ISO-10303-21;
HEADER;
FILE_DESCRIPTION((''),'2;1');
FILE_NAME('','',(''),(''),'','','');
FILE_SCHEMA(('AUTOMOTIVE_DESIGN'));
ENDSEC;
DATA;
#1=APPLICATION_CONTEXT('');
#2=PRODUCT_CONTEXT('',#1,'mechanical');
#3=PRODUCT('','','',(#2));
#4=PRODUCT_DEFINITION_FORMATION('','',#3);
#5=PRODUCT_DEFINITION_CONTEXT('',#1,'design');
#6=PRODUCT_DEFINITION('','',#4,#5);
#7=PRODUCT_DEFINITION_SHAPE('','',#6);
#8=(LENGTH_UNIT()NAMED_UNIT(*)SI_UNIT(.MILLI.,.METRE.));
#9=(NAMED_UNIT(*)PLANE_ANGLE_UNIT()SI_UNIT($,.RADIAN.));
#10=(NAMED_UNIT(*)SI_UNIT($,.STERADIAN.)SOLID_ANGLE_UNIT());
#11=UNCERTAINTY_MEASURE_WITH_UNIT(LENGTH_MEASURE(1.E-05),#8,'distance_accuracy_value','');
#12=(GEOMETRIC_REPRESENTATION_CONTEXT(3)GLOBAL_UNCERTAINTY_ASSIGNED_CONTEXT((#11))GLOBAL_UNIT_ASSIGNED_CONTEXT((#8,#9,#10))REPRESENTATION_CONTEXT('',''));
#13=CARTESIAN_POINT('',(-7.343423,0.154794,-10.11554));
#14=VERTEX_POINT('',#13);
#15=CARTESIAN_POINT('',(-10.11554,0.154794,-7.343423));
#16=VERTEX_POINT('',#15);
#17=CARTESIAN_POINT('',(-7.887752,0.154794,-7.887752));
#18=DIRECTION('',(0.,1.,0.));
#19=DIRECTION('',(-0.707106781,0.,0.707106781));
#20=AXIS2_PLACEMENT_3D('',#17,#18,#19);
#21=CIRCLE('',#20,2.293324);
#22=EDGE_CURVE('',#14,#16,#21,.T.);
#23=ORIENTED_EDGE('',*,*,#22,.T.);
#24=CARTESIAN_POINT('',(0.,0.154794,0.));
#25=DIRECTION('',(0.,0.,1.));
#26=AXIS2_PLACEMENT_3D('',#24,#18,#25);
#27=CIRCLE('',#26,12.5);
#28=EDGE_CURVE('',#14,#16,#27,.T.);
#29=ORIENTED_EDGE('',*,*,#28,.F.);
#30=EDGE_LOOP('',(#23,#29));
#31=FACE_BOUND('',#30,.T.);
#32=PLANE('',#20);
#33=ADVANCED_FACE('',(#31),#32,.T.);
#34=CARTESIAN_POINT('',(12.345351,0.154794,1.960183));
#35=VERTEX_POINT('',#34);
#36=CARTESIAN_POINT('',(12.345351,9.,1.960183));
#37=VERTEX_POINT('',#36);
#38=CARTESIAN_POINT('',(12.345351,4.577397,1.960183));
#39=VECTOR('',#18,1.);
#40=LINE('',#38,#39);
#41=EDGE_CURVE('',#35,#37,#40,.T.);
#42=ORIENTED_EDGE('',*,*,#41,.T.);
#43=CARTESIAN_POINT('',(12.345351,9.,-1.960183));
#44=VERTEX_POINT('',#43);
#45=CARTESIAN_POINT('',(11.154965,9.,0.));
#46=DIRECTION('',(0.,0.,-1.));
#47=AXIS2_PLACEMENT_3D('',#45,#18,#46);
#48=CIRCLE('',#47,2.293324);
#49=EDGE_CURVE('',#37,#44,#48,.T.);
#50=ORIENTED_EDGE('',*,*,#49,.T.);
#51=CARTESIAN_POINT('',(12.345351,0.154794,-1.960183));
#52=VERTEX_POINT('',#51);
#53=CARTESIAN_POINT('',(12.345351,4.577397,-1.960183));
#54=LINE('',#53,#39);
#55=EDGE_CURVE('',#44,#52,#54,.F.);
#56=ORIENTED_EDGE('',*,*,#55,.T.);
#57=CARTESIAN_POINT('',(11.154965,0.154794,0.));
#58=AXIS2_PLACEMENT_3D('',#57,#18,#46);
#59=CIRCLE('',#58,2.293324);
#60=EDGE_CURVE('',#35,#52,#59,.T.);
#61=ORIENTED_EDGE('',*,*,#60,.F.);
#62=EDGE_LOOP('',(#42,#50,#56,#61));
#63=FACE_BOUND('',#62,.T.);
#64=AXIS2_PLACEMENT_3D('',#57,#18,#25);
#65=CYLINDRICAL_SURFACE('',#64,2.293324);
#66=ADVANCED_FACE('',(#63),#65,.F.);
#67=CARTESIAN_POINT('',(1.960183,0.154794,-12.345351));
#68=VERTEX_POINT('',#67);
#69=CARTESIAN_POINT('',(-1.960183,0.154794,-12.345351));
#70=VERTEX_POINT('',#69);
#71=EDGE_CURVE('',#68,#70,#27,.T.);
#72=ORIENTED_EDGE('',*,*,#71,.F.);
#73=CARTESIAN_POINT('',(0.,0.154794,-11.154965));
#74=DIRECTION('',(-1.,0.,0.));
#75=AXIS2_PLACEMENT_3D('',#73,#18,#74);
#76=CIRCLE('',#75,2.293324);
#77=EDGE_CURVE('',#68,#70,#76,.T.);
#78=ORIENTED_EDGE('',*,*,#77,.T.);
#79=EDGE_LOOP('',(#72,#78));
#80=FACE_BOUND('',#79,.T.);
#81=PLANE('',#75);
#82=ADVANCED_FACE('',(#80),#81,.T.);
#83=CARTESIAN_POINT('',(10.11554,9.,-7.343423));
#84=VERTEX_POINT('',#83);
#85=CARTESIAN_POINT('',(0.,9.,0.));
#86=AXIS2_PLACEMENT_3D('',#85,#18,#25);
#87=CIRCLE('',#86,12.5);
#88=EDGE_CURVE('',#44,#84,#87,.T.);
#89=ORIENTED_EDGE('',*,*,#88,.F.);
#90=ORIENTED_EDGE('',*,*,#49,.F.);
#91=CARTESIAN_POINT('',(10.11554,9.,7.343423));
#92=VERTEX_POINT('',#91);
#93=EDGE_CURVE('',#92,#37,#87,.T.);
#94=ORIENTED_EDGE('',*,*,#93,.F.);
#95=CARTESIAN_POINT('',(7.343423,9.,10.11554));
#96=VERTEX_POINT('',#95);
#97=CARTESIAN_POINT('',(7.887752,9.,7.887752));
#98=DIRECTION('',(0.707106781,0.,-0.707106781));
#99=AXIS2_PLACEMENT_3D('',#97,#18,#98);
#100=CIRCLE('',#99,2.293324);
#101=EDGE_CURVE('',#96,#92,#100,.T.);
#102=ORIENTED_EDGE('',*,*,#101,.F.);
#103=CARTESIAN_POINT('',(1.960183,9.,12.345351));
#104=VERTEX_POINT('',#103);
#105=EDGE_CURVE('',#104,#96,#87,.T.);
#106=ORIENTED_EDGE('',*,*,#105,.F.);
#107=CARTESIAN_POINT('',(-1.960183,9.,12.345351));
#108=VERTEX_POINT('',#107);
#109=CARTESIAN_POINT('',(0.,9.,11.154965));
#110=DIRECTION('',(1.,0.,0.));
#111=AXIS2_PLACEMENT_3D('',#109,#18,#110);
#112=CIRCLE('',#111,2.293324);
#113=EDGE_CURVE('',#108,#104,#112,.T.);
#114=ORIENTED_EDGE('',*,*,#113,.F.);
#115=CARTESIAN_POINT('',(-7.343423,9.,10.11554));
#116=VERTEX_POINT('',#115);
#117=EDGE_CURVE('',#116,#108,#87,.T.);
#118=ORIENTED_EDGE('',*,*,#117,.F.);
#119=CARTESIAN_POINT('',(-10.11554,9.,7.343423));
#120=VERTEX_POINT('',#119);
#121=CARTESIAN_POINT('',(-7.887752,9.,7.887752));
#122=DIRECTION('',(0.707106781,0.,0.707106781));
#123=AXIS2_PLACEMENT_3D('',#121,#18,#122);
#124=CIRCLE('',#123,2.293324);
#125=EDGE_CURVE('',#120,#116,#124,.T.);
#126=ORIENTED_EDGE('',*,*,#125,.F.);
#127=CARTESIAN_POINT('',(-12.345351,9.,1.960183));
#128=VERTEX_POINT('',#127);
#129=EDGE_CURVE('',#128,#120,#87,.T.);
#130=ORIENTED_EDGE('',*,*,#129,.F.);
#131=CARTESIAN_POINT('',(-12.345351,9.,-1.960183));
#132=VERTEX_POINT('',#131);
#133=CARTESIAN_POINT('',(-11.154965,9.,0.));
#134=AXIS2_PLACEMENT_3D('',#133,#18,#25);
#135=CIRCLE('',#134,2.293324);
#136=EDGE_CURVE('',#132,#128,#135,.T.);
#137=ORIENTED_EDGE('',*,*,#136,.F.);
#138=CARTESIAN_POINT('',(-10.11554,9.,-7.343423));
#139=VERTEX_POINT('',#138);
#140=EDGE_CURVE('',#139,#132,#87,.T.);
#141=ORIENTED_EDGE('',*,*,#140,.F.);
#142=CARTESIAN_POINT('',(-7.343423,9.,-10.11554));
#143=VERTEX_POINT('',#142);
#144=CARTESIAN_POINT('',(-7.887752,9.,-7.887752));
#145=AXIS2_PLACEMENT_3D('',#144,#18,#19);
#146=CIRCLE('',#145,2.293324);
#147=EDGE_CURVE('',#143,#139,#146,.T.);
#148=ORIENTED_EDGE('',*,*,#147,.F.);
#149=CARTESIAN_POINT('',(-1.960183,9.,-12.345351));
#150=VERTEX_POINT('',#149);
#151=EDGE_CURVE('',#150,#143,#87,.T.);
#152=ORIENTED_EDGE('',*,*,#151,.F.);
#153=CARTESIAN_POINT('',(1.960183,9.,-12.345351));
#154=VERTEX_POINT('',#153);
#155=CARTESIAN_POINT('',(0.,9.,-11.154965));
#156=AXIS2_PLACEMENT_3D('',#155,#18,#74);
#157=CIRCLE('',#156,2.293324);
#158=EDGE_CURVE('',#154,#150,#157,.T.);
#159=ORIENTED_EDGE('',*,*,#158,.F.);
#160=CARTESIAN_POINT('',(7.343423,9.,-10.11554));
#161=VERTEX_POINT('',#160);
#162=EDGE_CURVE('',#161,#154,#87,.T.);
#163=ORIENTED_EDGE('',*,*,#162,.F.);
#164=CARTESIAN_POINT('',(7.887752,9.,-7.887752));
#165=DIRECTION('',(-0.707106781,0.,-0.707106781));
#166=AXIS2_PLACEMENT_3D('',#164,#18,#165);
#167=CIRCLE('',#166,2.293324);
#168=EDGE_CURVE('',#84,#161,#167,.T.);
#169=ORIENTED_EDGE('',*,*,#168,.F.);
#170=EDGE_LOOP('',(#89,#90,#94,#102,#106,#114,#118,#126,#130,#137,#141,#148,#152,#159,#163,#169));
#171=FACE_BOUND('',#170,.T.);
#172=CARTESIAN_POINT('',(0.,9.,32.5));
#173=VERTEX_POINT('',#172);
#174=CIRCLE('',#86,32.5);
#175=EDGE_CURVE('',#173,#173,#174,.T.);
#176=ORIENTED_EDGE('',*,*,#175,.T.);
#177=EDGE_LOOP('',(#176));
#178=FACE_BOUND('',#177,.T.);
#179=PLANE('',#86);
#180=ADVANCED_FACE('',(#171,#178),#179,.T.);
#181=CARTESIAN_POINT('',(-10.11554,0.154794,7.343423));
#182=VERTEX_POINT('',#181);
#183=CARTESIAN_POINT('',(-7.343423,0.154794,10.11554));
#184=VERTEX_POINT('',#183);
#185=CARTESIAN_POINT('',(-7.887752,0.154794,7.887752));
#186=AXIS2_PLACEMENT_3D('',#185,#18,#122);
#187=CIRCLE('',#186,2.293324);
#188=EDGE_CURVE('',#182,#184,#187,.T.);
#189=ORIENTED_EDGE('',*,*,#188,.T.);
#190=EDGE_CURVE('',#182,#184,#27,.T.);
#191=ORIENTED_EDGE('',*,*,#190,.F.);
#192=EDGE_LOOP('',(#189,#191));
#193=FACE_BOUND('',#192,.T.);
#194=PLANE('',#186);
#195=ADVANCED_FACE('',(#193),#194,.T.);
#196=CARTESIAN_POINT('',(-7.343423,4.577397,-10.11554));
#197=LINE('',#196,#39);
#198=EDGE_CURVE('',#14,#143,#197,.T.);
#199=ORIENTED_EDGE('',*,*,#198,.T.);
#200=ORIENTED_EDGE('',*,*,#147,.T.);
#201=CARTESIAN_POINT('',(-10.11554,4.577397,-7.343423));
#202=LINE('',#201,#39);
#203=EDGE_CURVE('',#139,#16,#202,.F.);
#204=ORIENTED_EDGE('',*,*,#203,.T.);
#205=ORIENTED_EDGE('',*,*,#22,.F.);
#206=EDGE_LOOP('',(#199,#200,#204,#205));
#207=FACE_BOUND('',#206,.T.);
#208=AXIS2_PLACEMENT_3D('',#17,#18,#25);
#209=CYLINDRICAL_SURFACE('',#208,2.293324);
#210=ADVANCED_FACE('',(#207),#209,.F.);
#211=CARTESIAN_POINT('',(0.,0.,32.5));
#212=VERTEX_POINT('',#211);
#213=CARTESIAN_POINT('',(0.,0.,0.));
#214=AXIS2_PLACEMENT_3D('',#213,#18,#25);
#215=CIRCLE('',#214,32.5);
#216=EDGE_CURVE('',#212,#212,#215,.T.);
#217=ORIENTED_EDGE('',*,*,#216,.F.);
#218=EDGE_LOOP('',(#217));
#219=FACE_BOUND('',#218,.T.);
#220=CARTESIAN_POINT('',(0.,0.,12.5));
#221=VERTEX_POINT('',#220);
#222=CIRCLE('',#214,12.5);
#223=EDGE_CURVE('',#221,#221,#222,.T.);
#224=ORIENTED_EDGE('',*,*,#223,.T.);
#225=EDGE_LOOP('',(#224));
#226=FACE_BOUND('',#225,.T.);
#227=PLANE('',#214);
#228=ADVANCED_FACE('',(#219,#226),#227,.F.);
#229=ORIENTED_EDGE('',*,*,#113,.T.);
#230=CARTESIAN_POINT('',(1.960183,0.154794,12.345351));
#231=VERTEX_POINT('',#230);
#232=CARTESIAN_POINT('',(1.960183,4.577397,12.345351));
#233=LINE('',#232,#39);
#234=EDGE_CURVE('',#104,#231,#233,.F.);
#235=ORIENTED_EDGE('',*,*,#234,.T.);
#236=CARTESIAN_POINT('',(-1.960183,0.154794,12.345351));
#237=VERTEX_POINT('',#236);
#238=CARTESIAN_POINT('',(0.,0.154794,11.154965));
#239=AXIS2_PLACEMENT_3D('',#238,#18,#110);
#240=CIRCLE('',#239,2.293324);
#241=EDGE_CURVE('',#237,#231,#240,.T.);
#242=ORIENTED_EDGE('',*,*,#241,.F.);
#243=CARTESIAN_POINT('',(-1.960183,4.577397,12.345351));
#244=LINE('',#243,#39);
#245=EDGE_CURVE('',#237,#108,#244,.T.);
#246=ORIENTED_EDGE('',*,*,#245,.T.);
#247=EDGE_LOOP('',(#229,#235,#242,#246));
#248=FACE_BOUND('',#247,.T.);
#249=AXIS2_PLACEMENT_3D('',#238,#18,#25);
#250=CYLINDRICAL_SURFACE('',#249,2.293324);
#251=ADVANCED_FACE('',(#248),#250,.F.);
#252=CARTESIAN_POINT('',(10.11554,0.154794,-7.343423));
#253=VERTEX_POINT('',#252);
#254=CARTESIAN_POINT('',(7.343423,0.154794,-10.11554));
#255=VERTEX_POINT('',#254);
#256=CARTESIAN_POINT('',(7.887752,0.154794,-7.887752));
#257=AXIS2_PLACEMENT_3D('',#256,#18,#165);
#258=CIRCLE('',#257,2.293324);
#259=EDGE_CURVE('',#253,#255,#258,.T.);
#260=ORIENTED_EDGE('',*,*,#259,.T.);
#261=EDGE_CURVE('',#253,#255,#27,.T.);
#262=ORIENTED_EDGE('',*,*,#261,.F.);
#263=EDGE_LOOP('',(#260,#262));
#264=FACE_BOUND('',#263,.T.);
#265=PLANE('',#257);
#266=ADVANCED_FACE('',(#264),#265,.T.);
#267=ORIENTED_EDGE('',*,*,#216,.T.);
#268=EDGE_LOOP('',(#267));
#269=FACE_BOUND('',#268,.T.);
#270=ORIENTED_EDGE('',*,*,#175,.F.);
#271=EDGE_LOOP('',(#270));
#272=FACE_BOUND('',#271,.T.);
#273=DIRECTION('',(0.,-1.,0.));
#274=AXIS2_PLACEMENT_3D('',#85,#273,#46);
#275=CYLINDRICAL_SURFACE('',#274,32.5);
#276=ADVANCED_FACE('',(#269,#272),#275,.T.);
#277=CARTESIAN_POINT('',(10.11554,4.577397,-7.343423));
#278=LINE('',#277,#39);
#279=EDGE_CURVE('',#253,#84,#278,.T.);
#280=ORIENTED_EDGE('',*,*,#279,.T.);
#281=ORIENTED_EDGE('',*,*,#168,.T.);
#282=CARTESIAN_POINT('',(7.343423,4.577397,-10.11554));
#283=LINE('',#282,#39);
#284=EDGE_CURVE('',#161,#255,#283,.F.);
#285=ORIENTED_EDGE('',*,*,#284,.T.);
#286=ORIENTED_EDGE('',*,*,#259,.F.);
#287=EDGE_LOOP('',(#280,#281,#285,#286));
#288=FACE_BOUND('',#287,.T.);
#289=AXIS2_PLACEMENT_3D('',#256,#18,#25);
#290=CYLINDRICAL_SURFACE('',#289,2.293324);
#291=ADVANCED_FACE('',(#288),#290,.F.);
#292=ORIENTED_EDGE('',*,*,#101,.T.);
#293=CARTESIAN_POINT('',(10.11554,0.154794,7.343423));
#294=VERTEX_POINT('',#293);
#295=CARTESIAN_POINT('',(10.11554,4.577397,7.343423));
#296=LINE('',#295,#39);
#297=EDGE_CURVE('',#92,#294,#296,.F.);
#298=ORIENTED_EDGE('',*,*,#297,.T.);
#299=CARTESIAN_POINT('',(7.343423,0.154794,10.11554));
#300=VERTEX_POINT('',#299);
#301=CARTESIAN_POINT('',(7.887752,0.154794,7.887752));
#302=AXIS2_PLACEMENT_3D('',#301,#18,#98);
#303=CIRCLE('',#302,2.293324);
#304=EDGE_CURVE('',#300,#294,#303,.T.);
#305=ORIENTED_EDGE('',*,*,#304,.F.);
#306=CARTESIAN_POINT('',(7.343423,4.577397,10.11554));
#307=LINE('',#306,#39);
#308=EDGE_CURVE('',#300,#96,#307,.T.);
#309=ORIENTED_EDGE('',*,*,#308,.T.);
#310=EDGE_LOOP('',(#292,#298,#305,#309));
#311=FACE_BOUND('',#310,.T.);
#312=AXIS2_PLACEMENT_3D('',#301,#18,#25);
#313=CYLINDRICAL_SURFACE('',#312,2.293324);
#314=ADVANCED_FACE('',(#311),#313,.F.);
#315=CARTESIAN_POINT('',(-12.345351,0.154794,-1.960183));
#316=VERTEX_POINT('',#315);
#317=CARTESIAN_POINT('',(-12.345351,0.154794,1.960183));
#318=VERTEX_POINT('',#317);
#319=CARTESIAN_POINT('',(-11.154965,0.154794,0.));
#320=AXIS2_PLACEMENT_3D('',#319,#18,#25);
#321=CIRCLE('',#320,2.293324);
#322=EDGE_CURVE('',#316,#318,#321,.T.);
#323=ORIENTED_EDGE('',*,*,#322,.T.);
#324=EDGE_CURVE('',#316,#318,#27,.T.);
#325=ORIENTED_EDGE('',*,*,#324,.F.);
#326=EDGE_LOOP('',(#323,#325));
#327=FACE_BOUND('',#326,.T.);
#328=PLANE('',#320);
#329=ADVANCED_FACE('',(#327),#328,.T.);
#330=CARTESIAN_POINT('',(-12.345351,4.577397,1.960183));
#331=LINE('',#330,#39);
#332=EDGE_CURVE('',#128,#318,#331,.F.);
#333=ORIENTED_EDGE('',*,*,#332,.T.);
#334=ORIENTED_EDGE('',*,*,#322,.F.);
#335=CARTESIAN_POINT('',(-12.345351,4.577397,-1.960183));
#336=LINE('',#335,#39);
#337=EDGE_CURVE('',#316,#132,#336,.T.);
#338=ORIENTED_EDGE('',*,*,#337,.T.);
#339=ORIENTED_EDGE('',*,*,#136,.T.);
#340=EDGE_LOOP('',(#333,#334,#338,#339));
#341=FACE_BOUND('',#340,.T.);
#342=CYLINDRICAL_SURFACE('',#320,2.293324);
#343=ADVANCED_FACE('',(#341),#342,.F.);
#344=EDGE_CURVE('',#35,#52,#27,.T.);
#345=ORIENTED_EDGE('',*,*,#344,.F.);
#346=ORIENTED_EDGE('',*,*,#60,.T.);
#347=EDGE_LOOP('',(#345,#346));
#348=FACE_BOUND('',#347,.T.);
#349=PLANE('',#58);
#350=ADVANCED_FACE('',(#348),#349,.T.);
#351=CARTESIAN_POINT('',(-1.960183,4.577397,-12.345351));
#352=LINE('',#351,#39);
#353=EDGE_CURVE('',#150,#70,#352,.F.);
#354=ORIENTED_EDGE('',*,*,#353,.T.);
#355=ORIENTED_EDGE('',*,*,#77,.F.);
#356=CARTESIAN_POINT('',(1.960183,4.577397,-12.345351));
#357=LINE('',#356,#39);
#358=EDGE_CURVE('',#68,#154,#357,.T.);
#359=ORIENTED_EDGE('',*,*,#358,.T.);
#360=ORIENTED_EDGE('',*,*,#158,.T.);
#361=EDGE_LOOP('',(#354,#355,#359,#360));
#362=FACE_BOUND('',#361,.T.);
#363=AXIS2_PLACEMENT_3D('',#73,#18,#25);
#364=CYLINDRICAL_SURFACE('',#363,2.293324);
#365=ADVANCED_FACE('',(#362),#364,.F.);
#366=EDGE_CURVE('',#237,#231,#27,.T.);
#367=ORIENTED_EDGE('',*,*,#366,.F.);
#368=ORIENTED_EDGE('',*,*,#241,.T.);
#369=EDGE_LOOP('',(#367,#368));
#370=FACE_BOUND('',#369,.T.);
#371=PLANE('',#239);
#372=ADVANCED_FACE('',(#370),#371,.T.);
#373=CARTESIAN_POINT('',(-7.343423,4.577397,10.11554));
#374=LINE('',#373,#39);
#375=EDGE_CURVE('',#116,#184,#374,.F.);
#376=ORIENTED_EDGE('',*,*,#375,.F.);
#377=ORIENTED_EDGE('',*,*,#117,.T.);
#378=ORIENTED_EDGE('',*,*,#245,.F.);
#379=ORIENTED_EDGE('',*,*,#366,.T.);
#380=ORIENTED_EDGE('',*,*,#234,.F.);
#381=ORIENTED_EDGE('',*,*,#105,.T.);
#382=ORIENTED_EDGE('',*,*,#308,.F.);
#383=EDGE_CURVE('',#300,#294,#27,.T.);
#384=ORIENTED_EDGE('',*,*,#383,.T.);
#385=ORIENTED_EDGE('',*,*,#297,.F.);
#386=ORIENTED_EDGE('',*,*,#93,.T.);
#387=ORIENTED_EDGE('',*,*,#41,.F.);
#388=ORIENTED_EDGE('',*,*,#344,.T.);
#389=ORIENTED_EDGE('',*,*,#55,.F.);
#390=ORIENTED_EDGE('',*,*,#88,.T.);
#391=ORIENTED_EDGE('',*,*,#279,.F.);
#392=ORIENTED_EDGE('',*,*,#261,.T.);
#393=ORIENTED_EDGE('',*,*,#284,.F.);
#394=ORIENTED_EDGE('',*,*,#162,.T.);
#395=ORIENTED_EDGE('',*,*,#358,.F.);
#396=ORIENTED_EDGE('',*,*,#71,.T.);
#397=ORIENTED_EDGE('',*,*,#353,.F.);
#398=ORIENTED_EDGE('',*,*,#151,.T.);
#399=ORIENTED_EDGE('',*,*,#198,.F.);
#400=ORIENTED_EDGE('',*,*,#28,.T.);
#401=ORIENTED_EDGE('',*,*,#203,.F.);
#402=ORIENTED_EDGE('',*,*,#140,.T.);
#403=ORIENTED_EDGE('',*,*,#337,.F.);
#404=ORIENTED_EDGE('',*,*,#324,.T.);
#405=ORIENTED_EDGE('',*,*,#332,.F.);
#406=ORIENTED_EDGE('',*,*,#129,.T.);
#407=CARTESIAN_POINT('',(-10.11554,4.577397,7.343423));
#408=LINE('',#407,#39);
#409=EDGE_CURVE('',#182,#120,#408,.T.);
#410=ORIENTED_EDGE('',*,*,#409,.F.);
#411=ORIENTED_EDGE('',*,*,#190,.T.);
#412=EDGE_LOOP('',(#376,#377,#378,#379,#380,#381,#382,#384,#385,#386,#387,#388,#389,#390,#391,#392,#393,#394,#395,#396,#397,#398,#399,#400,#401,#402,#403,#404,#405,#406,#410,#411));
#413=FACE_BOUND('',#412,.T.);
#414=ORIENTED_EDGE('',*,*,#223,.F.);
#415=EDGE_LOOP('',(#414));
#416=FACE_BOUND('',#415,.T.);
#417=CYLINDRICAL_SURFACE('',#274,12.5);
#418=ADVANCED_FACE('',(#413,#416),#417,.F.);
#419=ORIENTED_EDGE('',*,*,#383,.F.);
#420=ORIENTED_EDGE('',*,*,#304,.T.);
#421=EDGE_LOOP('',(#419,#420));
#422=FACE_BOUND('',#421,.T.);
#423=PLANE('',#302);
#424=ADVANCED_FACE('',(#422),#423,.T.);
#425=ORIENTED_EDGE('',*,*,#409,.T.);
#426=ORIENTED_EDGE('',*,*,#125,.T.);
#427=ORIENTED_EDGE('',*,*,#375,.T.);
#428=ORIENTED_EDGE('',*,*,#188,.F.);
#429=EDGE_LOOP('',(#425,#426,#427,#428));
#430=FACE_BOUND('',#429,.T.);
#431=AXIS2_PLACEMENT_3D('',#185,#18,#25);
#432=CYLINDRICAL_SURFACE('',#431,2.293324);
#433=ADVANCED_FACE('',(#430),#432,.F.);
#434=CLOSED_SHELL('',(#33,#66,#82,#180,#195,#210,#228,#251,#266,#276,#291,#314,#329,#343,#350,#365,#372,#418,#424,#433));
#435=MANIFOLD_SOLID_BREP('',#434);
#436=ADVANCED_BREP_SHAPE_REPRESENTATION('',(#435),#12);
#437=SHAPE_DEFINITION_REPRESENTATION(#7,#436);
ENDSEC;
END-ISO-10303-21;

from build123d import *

# Parameters (mm, degrees)
SKETCH1_R           = 32.5
BOSS_EXTRUDE1_DEPTH = 9
SKETCH2_R           = 12.5
CUT_EXTRUDE1_DEPTH  = 47.834816109
SKETCH3_R           = 2.293323558
CUT_EXTRUDE2_DEPTH  = 8.845206288
CIRPATTERN1_COUNT   = 8


with BuildPart() as part:
    # Sketch1 → Boss-Extrude1 (new body)
    with BuildSketch(Plane(origin=(0, 0, 0), x_dir=(1, 0, 0), z_dir=(0, 1, 0))):
        Circle(SKETCH1_R)
    extrude(amount=BOSS_EXTRUDE1_DEPTH)

    # Sketch2 → Cut-Extrude1 (cut, through all)
    with BuildSketch(Plane(origin=(0, 0, 0), x_dir=(1, 0, 0), z_dir=(0, 1, 0))):
        Circle(SKETCH2_R)
    extrude(amount=CUT_EXTRUDE1_DEPTH, mode=Mode.SUBTRACT)

    # Sketch3 → Cut-Extrude2 (cut)
    with BuildSketch(Plane(origin=(0, 9, 0), x_dir=(1, 0, 0), z_dir=(0, 1, 0))):
        with Locations((-11.154965368, 0)):
            Circle(SKETCH3_R)
    cut_extrude2 = extrude(amount=-CUT_EXTRUDE2_DEPTH, mode=Mode.SUBTRACT)

    # CirPattern1: Cut-Extrude2 ×8 about axis
    cirpattern1_axis = Axis((0, 0, 0), (0, 1, 0))
    for i in range(1, CIRPATTERN1_COUNT):
        add(cut_extrude2.rotate(cirpattern1_axis, i * 360 / CIRPATTERN1_COUNT), mode=Mode.SUBTRACT)


solid = part.part
